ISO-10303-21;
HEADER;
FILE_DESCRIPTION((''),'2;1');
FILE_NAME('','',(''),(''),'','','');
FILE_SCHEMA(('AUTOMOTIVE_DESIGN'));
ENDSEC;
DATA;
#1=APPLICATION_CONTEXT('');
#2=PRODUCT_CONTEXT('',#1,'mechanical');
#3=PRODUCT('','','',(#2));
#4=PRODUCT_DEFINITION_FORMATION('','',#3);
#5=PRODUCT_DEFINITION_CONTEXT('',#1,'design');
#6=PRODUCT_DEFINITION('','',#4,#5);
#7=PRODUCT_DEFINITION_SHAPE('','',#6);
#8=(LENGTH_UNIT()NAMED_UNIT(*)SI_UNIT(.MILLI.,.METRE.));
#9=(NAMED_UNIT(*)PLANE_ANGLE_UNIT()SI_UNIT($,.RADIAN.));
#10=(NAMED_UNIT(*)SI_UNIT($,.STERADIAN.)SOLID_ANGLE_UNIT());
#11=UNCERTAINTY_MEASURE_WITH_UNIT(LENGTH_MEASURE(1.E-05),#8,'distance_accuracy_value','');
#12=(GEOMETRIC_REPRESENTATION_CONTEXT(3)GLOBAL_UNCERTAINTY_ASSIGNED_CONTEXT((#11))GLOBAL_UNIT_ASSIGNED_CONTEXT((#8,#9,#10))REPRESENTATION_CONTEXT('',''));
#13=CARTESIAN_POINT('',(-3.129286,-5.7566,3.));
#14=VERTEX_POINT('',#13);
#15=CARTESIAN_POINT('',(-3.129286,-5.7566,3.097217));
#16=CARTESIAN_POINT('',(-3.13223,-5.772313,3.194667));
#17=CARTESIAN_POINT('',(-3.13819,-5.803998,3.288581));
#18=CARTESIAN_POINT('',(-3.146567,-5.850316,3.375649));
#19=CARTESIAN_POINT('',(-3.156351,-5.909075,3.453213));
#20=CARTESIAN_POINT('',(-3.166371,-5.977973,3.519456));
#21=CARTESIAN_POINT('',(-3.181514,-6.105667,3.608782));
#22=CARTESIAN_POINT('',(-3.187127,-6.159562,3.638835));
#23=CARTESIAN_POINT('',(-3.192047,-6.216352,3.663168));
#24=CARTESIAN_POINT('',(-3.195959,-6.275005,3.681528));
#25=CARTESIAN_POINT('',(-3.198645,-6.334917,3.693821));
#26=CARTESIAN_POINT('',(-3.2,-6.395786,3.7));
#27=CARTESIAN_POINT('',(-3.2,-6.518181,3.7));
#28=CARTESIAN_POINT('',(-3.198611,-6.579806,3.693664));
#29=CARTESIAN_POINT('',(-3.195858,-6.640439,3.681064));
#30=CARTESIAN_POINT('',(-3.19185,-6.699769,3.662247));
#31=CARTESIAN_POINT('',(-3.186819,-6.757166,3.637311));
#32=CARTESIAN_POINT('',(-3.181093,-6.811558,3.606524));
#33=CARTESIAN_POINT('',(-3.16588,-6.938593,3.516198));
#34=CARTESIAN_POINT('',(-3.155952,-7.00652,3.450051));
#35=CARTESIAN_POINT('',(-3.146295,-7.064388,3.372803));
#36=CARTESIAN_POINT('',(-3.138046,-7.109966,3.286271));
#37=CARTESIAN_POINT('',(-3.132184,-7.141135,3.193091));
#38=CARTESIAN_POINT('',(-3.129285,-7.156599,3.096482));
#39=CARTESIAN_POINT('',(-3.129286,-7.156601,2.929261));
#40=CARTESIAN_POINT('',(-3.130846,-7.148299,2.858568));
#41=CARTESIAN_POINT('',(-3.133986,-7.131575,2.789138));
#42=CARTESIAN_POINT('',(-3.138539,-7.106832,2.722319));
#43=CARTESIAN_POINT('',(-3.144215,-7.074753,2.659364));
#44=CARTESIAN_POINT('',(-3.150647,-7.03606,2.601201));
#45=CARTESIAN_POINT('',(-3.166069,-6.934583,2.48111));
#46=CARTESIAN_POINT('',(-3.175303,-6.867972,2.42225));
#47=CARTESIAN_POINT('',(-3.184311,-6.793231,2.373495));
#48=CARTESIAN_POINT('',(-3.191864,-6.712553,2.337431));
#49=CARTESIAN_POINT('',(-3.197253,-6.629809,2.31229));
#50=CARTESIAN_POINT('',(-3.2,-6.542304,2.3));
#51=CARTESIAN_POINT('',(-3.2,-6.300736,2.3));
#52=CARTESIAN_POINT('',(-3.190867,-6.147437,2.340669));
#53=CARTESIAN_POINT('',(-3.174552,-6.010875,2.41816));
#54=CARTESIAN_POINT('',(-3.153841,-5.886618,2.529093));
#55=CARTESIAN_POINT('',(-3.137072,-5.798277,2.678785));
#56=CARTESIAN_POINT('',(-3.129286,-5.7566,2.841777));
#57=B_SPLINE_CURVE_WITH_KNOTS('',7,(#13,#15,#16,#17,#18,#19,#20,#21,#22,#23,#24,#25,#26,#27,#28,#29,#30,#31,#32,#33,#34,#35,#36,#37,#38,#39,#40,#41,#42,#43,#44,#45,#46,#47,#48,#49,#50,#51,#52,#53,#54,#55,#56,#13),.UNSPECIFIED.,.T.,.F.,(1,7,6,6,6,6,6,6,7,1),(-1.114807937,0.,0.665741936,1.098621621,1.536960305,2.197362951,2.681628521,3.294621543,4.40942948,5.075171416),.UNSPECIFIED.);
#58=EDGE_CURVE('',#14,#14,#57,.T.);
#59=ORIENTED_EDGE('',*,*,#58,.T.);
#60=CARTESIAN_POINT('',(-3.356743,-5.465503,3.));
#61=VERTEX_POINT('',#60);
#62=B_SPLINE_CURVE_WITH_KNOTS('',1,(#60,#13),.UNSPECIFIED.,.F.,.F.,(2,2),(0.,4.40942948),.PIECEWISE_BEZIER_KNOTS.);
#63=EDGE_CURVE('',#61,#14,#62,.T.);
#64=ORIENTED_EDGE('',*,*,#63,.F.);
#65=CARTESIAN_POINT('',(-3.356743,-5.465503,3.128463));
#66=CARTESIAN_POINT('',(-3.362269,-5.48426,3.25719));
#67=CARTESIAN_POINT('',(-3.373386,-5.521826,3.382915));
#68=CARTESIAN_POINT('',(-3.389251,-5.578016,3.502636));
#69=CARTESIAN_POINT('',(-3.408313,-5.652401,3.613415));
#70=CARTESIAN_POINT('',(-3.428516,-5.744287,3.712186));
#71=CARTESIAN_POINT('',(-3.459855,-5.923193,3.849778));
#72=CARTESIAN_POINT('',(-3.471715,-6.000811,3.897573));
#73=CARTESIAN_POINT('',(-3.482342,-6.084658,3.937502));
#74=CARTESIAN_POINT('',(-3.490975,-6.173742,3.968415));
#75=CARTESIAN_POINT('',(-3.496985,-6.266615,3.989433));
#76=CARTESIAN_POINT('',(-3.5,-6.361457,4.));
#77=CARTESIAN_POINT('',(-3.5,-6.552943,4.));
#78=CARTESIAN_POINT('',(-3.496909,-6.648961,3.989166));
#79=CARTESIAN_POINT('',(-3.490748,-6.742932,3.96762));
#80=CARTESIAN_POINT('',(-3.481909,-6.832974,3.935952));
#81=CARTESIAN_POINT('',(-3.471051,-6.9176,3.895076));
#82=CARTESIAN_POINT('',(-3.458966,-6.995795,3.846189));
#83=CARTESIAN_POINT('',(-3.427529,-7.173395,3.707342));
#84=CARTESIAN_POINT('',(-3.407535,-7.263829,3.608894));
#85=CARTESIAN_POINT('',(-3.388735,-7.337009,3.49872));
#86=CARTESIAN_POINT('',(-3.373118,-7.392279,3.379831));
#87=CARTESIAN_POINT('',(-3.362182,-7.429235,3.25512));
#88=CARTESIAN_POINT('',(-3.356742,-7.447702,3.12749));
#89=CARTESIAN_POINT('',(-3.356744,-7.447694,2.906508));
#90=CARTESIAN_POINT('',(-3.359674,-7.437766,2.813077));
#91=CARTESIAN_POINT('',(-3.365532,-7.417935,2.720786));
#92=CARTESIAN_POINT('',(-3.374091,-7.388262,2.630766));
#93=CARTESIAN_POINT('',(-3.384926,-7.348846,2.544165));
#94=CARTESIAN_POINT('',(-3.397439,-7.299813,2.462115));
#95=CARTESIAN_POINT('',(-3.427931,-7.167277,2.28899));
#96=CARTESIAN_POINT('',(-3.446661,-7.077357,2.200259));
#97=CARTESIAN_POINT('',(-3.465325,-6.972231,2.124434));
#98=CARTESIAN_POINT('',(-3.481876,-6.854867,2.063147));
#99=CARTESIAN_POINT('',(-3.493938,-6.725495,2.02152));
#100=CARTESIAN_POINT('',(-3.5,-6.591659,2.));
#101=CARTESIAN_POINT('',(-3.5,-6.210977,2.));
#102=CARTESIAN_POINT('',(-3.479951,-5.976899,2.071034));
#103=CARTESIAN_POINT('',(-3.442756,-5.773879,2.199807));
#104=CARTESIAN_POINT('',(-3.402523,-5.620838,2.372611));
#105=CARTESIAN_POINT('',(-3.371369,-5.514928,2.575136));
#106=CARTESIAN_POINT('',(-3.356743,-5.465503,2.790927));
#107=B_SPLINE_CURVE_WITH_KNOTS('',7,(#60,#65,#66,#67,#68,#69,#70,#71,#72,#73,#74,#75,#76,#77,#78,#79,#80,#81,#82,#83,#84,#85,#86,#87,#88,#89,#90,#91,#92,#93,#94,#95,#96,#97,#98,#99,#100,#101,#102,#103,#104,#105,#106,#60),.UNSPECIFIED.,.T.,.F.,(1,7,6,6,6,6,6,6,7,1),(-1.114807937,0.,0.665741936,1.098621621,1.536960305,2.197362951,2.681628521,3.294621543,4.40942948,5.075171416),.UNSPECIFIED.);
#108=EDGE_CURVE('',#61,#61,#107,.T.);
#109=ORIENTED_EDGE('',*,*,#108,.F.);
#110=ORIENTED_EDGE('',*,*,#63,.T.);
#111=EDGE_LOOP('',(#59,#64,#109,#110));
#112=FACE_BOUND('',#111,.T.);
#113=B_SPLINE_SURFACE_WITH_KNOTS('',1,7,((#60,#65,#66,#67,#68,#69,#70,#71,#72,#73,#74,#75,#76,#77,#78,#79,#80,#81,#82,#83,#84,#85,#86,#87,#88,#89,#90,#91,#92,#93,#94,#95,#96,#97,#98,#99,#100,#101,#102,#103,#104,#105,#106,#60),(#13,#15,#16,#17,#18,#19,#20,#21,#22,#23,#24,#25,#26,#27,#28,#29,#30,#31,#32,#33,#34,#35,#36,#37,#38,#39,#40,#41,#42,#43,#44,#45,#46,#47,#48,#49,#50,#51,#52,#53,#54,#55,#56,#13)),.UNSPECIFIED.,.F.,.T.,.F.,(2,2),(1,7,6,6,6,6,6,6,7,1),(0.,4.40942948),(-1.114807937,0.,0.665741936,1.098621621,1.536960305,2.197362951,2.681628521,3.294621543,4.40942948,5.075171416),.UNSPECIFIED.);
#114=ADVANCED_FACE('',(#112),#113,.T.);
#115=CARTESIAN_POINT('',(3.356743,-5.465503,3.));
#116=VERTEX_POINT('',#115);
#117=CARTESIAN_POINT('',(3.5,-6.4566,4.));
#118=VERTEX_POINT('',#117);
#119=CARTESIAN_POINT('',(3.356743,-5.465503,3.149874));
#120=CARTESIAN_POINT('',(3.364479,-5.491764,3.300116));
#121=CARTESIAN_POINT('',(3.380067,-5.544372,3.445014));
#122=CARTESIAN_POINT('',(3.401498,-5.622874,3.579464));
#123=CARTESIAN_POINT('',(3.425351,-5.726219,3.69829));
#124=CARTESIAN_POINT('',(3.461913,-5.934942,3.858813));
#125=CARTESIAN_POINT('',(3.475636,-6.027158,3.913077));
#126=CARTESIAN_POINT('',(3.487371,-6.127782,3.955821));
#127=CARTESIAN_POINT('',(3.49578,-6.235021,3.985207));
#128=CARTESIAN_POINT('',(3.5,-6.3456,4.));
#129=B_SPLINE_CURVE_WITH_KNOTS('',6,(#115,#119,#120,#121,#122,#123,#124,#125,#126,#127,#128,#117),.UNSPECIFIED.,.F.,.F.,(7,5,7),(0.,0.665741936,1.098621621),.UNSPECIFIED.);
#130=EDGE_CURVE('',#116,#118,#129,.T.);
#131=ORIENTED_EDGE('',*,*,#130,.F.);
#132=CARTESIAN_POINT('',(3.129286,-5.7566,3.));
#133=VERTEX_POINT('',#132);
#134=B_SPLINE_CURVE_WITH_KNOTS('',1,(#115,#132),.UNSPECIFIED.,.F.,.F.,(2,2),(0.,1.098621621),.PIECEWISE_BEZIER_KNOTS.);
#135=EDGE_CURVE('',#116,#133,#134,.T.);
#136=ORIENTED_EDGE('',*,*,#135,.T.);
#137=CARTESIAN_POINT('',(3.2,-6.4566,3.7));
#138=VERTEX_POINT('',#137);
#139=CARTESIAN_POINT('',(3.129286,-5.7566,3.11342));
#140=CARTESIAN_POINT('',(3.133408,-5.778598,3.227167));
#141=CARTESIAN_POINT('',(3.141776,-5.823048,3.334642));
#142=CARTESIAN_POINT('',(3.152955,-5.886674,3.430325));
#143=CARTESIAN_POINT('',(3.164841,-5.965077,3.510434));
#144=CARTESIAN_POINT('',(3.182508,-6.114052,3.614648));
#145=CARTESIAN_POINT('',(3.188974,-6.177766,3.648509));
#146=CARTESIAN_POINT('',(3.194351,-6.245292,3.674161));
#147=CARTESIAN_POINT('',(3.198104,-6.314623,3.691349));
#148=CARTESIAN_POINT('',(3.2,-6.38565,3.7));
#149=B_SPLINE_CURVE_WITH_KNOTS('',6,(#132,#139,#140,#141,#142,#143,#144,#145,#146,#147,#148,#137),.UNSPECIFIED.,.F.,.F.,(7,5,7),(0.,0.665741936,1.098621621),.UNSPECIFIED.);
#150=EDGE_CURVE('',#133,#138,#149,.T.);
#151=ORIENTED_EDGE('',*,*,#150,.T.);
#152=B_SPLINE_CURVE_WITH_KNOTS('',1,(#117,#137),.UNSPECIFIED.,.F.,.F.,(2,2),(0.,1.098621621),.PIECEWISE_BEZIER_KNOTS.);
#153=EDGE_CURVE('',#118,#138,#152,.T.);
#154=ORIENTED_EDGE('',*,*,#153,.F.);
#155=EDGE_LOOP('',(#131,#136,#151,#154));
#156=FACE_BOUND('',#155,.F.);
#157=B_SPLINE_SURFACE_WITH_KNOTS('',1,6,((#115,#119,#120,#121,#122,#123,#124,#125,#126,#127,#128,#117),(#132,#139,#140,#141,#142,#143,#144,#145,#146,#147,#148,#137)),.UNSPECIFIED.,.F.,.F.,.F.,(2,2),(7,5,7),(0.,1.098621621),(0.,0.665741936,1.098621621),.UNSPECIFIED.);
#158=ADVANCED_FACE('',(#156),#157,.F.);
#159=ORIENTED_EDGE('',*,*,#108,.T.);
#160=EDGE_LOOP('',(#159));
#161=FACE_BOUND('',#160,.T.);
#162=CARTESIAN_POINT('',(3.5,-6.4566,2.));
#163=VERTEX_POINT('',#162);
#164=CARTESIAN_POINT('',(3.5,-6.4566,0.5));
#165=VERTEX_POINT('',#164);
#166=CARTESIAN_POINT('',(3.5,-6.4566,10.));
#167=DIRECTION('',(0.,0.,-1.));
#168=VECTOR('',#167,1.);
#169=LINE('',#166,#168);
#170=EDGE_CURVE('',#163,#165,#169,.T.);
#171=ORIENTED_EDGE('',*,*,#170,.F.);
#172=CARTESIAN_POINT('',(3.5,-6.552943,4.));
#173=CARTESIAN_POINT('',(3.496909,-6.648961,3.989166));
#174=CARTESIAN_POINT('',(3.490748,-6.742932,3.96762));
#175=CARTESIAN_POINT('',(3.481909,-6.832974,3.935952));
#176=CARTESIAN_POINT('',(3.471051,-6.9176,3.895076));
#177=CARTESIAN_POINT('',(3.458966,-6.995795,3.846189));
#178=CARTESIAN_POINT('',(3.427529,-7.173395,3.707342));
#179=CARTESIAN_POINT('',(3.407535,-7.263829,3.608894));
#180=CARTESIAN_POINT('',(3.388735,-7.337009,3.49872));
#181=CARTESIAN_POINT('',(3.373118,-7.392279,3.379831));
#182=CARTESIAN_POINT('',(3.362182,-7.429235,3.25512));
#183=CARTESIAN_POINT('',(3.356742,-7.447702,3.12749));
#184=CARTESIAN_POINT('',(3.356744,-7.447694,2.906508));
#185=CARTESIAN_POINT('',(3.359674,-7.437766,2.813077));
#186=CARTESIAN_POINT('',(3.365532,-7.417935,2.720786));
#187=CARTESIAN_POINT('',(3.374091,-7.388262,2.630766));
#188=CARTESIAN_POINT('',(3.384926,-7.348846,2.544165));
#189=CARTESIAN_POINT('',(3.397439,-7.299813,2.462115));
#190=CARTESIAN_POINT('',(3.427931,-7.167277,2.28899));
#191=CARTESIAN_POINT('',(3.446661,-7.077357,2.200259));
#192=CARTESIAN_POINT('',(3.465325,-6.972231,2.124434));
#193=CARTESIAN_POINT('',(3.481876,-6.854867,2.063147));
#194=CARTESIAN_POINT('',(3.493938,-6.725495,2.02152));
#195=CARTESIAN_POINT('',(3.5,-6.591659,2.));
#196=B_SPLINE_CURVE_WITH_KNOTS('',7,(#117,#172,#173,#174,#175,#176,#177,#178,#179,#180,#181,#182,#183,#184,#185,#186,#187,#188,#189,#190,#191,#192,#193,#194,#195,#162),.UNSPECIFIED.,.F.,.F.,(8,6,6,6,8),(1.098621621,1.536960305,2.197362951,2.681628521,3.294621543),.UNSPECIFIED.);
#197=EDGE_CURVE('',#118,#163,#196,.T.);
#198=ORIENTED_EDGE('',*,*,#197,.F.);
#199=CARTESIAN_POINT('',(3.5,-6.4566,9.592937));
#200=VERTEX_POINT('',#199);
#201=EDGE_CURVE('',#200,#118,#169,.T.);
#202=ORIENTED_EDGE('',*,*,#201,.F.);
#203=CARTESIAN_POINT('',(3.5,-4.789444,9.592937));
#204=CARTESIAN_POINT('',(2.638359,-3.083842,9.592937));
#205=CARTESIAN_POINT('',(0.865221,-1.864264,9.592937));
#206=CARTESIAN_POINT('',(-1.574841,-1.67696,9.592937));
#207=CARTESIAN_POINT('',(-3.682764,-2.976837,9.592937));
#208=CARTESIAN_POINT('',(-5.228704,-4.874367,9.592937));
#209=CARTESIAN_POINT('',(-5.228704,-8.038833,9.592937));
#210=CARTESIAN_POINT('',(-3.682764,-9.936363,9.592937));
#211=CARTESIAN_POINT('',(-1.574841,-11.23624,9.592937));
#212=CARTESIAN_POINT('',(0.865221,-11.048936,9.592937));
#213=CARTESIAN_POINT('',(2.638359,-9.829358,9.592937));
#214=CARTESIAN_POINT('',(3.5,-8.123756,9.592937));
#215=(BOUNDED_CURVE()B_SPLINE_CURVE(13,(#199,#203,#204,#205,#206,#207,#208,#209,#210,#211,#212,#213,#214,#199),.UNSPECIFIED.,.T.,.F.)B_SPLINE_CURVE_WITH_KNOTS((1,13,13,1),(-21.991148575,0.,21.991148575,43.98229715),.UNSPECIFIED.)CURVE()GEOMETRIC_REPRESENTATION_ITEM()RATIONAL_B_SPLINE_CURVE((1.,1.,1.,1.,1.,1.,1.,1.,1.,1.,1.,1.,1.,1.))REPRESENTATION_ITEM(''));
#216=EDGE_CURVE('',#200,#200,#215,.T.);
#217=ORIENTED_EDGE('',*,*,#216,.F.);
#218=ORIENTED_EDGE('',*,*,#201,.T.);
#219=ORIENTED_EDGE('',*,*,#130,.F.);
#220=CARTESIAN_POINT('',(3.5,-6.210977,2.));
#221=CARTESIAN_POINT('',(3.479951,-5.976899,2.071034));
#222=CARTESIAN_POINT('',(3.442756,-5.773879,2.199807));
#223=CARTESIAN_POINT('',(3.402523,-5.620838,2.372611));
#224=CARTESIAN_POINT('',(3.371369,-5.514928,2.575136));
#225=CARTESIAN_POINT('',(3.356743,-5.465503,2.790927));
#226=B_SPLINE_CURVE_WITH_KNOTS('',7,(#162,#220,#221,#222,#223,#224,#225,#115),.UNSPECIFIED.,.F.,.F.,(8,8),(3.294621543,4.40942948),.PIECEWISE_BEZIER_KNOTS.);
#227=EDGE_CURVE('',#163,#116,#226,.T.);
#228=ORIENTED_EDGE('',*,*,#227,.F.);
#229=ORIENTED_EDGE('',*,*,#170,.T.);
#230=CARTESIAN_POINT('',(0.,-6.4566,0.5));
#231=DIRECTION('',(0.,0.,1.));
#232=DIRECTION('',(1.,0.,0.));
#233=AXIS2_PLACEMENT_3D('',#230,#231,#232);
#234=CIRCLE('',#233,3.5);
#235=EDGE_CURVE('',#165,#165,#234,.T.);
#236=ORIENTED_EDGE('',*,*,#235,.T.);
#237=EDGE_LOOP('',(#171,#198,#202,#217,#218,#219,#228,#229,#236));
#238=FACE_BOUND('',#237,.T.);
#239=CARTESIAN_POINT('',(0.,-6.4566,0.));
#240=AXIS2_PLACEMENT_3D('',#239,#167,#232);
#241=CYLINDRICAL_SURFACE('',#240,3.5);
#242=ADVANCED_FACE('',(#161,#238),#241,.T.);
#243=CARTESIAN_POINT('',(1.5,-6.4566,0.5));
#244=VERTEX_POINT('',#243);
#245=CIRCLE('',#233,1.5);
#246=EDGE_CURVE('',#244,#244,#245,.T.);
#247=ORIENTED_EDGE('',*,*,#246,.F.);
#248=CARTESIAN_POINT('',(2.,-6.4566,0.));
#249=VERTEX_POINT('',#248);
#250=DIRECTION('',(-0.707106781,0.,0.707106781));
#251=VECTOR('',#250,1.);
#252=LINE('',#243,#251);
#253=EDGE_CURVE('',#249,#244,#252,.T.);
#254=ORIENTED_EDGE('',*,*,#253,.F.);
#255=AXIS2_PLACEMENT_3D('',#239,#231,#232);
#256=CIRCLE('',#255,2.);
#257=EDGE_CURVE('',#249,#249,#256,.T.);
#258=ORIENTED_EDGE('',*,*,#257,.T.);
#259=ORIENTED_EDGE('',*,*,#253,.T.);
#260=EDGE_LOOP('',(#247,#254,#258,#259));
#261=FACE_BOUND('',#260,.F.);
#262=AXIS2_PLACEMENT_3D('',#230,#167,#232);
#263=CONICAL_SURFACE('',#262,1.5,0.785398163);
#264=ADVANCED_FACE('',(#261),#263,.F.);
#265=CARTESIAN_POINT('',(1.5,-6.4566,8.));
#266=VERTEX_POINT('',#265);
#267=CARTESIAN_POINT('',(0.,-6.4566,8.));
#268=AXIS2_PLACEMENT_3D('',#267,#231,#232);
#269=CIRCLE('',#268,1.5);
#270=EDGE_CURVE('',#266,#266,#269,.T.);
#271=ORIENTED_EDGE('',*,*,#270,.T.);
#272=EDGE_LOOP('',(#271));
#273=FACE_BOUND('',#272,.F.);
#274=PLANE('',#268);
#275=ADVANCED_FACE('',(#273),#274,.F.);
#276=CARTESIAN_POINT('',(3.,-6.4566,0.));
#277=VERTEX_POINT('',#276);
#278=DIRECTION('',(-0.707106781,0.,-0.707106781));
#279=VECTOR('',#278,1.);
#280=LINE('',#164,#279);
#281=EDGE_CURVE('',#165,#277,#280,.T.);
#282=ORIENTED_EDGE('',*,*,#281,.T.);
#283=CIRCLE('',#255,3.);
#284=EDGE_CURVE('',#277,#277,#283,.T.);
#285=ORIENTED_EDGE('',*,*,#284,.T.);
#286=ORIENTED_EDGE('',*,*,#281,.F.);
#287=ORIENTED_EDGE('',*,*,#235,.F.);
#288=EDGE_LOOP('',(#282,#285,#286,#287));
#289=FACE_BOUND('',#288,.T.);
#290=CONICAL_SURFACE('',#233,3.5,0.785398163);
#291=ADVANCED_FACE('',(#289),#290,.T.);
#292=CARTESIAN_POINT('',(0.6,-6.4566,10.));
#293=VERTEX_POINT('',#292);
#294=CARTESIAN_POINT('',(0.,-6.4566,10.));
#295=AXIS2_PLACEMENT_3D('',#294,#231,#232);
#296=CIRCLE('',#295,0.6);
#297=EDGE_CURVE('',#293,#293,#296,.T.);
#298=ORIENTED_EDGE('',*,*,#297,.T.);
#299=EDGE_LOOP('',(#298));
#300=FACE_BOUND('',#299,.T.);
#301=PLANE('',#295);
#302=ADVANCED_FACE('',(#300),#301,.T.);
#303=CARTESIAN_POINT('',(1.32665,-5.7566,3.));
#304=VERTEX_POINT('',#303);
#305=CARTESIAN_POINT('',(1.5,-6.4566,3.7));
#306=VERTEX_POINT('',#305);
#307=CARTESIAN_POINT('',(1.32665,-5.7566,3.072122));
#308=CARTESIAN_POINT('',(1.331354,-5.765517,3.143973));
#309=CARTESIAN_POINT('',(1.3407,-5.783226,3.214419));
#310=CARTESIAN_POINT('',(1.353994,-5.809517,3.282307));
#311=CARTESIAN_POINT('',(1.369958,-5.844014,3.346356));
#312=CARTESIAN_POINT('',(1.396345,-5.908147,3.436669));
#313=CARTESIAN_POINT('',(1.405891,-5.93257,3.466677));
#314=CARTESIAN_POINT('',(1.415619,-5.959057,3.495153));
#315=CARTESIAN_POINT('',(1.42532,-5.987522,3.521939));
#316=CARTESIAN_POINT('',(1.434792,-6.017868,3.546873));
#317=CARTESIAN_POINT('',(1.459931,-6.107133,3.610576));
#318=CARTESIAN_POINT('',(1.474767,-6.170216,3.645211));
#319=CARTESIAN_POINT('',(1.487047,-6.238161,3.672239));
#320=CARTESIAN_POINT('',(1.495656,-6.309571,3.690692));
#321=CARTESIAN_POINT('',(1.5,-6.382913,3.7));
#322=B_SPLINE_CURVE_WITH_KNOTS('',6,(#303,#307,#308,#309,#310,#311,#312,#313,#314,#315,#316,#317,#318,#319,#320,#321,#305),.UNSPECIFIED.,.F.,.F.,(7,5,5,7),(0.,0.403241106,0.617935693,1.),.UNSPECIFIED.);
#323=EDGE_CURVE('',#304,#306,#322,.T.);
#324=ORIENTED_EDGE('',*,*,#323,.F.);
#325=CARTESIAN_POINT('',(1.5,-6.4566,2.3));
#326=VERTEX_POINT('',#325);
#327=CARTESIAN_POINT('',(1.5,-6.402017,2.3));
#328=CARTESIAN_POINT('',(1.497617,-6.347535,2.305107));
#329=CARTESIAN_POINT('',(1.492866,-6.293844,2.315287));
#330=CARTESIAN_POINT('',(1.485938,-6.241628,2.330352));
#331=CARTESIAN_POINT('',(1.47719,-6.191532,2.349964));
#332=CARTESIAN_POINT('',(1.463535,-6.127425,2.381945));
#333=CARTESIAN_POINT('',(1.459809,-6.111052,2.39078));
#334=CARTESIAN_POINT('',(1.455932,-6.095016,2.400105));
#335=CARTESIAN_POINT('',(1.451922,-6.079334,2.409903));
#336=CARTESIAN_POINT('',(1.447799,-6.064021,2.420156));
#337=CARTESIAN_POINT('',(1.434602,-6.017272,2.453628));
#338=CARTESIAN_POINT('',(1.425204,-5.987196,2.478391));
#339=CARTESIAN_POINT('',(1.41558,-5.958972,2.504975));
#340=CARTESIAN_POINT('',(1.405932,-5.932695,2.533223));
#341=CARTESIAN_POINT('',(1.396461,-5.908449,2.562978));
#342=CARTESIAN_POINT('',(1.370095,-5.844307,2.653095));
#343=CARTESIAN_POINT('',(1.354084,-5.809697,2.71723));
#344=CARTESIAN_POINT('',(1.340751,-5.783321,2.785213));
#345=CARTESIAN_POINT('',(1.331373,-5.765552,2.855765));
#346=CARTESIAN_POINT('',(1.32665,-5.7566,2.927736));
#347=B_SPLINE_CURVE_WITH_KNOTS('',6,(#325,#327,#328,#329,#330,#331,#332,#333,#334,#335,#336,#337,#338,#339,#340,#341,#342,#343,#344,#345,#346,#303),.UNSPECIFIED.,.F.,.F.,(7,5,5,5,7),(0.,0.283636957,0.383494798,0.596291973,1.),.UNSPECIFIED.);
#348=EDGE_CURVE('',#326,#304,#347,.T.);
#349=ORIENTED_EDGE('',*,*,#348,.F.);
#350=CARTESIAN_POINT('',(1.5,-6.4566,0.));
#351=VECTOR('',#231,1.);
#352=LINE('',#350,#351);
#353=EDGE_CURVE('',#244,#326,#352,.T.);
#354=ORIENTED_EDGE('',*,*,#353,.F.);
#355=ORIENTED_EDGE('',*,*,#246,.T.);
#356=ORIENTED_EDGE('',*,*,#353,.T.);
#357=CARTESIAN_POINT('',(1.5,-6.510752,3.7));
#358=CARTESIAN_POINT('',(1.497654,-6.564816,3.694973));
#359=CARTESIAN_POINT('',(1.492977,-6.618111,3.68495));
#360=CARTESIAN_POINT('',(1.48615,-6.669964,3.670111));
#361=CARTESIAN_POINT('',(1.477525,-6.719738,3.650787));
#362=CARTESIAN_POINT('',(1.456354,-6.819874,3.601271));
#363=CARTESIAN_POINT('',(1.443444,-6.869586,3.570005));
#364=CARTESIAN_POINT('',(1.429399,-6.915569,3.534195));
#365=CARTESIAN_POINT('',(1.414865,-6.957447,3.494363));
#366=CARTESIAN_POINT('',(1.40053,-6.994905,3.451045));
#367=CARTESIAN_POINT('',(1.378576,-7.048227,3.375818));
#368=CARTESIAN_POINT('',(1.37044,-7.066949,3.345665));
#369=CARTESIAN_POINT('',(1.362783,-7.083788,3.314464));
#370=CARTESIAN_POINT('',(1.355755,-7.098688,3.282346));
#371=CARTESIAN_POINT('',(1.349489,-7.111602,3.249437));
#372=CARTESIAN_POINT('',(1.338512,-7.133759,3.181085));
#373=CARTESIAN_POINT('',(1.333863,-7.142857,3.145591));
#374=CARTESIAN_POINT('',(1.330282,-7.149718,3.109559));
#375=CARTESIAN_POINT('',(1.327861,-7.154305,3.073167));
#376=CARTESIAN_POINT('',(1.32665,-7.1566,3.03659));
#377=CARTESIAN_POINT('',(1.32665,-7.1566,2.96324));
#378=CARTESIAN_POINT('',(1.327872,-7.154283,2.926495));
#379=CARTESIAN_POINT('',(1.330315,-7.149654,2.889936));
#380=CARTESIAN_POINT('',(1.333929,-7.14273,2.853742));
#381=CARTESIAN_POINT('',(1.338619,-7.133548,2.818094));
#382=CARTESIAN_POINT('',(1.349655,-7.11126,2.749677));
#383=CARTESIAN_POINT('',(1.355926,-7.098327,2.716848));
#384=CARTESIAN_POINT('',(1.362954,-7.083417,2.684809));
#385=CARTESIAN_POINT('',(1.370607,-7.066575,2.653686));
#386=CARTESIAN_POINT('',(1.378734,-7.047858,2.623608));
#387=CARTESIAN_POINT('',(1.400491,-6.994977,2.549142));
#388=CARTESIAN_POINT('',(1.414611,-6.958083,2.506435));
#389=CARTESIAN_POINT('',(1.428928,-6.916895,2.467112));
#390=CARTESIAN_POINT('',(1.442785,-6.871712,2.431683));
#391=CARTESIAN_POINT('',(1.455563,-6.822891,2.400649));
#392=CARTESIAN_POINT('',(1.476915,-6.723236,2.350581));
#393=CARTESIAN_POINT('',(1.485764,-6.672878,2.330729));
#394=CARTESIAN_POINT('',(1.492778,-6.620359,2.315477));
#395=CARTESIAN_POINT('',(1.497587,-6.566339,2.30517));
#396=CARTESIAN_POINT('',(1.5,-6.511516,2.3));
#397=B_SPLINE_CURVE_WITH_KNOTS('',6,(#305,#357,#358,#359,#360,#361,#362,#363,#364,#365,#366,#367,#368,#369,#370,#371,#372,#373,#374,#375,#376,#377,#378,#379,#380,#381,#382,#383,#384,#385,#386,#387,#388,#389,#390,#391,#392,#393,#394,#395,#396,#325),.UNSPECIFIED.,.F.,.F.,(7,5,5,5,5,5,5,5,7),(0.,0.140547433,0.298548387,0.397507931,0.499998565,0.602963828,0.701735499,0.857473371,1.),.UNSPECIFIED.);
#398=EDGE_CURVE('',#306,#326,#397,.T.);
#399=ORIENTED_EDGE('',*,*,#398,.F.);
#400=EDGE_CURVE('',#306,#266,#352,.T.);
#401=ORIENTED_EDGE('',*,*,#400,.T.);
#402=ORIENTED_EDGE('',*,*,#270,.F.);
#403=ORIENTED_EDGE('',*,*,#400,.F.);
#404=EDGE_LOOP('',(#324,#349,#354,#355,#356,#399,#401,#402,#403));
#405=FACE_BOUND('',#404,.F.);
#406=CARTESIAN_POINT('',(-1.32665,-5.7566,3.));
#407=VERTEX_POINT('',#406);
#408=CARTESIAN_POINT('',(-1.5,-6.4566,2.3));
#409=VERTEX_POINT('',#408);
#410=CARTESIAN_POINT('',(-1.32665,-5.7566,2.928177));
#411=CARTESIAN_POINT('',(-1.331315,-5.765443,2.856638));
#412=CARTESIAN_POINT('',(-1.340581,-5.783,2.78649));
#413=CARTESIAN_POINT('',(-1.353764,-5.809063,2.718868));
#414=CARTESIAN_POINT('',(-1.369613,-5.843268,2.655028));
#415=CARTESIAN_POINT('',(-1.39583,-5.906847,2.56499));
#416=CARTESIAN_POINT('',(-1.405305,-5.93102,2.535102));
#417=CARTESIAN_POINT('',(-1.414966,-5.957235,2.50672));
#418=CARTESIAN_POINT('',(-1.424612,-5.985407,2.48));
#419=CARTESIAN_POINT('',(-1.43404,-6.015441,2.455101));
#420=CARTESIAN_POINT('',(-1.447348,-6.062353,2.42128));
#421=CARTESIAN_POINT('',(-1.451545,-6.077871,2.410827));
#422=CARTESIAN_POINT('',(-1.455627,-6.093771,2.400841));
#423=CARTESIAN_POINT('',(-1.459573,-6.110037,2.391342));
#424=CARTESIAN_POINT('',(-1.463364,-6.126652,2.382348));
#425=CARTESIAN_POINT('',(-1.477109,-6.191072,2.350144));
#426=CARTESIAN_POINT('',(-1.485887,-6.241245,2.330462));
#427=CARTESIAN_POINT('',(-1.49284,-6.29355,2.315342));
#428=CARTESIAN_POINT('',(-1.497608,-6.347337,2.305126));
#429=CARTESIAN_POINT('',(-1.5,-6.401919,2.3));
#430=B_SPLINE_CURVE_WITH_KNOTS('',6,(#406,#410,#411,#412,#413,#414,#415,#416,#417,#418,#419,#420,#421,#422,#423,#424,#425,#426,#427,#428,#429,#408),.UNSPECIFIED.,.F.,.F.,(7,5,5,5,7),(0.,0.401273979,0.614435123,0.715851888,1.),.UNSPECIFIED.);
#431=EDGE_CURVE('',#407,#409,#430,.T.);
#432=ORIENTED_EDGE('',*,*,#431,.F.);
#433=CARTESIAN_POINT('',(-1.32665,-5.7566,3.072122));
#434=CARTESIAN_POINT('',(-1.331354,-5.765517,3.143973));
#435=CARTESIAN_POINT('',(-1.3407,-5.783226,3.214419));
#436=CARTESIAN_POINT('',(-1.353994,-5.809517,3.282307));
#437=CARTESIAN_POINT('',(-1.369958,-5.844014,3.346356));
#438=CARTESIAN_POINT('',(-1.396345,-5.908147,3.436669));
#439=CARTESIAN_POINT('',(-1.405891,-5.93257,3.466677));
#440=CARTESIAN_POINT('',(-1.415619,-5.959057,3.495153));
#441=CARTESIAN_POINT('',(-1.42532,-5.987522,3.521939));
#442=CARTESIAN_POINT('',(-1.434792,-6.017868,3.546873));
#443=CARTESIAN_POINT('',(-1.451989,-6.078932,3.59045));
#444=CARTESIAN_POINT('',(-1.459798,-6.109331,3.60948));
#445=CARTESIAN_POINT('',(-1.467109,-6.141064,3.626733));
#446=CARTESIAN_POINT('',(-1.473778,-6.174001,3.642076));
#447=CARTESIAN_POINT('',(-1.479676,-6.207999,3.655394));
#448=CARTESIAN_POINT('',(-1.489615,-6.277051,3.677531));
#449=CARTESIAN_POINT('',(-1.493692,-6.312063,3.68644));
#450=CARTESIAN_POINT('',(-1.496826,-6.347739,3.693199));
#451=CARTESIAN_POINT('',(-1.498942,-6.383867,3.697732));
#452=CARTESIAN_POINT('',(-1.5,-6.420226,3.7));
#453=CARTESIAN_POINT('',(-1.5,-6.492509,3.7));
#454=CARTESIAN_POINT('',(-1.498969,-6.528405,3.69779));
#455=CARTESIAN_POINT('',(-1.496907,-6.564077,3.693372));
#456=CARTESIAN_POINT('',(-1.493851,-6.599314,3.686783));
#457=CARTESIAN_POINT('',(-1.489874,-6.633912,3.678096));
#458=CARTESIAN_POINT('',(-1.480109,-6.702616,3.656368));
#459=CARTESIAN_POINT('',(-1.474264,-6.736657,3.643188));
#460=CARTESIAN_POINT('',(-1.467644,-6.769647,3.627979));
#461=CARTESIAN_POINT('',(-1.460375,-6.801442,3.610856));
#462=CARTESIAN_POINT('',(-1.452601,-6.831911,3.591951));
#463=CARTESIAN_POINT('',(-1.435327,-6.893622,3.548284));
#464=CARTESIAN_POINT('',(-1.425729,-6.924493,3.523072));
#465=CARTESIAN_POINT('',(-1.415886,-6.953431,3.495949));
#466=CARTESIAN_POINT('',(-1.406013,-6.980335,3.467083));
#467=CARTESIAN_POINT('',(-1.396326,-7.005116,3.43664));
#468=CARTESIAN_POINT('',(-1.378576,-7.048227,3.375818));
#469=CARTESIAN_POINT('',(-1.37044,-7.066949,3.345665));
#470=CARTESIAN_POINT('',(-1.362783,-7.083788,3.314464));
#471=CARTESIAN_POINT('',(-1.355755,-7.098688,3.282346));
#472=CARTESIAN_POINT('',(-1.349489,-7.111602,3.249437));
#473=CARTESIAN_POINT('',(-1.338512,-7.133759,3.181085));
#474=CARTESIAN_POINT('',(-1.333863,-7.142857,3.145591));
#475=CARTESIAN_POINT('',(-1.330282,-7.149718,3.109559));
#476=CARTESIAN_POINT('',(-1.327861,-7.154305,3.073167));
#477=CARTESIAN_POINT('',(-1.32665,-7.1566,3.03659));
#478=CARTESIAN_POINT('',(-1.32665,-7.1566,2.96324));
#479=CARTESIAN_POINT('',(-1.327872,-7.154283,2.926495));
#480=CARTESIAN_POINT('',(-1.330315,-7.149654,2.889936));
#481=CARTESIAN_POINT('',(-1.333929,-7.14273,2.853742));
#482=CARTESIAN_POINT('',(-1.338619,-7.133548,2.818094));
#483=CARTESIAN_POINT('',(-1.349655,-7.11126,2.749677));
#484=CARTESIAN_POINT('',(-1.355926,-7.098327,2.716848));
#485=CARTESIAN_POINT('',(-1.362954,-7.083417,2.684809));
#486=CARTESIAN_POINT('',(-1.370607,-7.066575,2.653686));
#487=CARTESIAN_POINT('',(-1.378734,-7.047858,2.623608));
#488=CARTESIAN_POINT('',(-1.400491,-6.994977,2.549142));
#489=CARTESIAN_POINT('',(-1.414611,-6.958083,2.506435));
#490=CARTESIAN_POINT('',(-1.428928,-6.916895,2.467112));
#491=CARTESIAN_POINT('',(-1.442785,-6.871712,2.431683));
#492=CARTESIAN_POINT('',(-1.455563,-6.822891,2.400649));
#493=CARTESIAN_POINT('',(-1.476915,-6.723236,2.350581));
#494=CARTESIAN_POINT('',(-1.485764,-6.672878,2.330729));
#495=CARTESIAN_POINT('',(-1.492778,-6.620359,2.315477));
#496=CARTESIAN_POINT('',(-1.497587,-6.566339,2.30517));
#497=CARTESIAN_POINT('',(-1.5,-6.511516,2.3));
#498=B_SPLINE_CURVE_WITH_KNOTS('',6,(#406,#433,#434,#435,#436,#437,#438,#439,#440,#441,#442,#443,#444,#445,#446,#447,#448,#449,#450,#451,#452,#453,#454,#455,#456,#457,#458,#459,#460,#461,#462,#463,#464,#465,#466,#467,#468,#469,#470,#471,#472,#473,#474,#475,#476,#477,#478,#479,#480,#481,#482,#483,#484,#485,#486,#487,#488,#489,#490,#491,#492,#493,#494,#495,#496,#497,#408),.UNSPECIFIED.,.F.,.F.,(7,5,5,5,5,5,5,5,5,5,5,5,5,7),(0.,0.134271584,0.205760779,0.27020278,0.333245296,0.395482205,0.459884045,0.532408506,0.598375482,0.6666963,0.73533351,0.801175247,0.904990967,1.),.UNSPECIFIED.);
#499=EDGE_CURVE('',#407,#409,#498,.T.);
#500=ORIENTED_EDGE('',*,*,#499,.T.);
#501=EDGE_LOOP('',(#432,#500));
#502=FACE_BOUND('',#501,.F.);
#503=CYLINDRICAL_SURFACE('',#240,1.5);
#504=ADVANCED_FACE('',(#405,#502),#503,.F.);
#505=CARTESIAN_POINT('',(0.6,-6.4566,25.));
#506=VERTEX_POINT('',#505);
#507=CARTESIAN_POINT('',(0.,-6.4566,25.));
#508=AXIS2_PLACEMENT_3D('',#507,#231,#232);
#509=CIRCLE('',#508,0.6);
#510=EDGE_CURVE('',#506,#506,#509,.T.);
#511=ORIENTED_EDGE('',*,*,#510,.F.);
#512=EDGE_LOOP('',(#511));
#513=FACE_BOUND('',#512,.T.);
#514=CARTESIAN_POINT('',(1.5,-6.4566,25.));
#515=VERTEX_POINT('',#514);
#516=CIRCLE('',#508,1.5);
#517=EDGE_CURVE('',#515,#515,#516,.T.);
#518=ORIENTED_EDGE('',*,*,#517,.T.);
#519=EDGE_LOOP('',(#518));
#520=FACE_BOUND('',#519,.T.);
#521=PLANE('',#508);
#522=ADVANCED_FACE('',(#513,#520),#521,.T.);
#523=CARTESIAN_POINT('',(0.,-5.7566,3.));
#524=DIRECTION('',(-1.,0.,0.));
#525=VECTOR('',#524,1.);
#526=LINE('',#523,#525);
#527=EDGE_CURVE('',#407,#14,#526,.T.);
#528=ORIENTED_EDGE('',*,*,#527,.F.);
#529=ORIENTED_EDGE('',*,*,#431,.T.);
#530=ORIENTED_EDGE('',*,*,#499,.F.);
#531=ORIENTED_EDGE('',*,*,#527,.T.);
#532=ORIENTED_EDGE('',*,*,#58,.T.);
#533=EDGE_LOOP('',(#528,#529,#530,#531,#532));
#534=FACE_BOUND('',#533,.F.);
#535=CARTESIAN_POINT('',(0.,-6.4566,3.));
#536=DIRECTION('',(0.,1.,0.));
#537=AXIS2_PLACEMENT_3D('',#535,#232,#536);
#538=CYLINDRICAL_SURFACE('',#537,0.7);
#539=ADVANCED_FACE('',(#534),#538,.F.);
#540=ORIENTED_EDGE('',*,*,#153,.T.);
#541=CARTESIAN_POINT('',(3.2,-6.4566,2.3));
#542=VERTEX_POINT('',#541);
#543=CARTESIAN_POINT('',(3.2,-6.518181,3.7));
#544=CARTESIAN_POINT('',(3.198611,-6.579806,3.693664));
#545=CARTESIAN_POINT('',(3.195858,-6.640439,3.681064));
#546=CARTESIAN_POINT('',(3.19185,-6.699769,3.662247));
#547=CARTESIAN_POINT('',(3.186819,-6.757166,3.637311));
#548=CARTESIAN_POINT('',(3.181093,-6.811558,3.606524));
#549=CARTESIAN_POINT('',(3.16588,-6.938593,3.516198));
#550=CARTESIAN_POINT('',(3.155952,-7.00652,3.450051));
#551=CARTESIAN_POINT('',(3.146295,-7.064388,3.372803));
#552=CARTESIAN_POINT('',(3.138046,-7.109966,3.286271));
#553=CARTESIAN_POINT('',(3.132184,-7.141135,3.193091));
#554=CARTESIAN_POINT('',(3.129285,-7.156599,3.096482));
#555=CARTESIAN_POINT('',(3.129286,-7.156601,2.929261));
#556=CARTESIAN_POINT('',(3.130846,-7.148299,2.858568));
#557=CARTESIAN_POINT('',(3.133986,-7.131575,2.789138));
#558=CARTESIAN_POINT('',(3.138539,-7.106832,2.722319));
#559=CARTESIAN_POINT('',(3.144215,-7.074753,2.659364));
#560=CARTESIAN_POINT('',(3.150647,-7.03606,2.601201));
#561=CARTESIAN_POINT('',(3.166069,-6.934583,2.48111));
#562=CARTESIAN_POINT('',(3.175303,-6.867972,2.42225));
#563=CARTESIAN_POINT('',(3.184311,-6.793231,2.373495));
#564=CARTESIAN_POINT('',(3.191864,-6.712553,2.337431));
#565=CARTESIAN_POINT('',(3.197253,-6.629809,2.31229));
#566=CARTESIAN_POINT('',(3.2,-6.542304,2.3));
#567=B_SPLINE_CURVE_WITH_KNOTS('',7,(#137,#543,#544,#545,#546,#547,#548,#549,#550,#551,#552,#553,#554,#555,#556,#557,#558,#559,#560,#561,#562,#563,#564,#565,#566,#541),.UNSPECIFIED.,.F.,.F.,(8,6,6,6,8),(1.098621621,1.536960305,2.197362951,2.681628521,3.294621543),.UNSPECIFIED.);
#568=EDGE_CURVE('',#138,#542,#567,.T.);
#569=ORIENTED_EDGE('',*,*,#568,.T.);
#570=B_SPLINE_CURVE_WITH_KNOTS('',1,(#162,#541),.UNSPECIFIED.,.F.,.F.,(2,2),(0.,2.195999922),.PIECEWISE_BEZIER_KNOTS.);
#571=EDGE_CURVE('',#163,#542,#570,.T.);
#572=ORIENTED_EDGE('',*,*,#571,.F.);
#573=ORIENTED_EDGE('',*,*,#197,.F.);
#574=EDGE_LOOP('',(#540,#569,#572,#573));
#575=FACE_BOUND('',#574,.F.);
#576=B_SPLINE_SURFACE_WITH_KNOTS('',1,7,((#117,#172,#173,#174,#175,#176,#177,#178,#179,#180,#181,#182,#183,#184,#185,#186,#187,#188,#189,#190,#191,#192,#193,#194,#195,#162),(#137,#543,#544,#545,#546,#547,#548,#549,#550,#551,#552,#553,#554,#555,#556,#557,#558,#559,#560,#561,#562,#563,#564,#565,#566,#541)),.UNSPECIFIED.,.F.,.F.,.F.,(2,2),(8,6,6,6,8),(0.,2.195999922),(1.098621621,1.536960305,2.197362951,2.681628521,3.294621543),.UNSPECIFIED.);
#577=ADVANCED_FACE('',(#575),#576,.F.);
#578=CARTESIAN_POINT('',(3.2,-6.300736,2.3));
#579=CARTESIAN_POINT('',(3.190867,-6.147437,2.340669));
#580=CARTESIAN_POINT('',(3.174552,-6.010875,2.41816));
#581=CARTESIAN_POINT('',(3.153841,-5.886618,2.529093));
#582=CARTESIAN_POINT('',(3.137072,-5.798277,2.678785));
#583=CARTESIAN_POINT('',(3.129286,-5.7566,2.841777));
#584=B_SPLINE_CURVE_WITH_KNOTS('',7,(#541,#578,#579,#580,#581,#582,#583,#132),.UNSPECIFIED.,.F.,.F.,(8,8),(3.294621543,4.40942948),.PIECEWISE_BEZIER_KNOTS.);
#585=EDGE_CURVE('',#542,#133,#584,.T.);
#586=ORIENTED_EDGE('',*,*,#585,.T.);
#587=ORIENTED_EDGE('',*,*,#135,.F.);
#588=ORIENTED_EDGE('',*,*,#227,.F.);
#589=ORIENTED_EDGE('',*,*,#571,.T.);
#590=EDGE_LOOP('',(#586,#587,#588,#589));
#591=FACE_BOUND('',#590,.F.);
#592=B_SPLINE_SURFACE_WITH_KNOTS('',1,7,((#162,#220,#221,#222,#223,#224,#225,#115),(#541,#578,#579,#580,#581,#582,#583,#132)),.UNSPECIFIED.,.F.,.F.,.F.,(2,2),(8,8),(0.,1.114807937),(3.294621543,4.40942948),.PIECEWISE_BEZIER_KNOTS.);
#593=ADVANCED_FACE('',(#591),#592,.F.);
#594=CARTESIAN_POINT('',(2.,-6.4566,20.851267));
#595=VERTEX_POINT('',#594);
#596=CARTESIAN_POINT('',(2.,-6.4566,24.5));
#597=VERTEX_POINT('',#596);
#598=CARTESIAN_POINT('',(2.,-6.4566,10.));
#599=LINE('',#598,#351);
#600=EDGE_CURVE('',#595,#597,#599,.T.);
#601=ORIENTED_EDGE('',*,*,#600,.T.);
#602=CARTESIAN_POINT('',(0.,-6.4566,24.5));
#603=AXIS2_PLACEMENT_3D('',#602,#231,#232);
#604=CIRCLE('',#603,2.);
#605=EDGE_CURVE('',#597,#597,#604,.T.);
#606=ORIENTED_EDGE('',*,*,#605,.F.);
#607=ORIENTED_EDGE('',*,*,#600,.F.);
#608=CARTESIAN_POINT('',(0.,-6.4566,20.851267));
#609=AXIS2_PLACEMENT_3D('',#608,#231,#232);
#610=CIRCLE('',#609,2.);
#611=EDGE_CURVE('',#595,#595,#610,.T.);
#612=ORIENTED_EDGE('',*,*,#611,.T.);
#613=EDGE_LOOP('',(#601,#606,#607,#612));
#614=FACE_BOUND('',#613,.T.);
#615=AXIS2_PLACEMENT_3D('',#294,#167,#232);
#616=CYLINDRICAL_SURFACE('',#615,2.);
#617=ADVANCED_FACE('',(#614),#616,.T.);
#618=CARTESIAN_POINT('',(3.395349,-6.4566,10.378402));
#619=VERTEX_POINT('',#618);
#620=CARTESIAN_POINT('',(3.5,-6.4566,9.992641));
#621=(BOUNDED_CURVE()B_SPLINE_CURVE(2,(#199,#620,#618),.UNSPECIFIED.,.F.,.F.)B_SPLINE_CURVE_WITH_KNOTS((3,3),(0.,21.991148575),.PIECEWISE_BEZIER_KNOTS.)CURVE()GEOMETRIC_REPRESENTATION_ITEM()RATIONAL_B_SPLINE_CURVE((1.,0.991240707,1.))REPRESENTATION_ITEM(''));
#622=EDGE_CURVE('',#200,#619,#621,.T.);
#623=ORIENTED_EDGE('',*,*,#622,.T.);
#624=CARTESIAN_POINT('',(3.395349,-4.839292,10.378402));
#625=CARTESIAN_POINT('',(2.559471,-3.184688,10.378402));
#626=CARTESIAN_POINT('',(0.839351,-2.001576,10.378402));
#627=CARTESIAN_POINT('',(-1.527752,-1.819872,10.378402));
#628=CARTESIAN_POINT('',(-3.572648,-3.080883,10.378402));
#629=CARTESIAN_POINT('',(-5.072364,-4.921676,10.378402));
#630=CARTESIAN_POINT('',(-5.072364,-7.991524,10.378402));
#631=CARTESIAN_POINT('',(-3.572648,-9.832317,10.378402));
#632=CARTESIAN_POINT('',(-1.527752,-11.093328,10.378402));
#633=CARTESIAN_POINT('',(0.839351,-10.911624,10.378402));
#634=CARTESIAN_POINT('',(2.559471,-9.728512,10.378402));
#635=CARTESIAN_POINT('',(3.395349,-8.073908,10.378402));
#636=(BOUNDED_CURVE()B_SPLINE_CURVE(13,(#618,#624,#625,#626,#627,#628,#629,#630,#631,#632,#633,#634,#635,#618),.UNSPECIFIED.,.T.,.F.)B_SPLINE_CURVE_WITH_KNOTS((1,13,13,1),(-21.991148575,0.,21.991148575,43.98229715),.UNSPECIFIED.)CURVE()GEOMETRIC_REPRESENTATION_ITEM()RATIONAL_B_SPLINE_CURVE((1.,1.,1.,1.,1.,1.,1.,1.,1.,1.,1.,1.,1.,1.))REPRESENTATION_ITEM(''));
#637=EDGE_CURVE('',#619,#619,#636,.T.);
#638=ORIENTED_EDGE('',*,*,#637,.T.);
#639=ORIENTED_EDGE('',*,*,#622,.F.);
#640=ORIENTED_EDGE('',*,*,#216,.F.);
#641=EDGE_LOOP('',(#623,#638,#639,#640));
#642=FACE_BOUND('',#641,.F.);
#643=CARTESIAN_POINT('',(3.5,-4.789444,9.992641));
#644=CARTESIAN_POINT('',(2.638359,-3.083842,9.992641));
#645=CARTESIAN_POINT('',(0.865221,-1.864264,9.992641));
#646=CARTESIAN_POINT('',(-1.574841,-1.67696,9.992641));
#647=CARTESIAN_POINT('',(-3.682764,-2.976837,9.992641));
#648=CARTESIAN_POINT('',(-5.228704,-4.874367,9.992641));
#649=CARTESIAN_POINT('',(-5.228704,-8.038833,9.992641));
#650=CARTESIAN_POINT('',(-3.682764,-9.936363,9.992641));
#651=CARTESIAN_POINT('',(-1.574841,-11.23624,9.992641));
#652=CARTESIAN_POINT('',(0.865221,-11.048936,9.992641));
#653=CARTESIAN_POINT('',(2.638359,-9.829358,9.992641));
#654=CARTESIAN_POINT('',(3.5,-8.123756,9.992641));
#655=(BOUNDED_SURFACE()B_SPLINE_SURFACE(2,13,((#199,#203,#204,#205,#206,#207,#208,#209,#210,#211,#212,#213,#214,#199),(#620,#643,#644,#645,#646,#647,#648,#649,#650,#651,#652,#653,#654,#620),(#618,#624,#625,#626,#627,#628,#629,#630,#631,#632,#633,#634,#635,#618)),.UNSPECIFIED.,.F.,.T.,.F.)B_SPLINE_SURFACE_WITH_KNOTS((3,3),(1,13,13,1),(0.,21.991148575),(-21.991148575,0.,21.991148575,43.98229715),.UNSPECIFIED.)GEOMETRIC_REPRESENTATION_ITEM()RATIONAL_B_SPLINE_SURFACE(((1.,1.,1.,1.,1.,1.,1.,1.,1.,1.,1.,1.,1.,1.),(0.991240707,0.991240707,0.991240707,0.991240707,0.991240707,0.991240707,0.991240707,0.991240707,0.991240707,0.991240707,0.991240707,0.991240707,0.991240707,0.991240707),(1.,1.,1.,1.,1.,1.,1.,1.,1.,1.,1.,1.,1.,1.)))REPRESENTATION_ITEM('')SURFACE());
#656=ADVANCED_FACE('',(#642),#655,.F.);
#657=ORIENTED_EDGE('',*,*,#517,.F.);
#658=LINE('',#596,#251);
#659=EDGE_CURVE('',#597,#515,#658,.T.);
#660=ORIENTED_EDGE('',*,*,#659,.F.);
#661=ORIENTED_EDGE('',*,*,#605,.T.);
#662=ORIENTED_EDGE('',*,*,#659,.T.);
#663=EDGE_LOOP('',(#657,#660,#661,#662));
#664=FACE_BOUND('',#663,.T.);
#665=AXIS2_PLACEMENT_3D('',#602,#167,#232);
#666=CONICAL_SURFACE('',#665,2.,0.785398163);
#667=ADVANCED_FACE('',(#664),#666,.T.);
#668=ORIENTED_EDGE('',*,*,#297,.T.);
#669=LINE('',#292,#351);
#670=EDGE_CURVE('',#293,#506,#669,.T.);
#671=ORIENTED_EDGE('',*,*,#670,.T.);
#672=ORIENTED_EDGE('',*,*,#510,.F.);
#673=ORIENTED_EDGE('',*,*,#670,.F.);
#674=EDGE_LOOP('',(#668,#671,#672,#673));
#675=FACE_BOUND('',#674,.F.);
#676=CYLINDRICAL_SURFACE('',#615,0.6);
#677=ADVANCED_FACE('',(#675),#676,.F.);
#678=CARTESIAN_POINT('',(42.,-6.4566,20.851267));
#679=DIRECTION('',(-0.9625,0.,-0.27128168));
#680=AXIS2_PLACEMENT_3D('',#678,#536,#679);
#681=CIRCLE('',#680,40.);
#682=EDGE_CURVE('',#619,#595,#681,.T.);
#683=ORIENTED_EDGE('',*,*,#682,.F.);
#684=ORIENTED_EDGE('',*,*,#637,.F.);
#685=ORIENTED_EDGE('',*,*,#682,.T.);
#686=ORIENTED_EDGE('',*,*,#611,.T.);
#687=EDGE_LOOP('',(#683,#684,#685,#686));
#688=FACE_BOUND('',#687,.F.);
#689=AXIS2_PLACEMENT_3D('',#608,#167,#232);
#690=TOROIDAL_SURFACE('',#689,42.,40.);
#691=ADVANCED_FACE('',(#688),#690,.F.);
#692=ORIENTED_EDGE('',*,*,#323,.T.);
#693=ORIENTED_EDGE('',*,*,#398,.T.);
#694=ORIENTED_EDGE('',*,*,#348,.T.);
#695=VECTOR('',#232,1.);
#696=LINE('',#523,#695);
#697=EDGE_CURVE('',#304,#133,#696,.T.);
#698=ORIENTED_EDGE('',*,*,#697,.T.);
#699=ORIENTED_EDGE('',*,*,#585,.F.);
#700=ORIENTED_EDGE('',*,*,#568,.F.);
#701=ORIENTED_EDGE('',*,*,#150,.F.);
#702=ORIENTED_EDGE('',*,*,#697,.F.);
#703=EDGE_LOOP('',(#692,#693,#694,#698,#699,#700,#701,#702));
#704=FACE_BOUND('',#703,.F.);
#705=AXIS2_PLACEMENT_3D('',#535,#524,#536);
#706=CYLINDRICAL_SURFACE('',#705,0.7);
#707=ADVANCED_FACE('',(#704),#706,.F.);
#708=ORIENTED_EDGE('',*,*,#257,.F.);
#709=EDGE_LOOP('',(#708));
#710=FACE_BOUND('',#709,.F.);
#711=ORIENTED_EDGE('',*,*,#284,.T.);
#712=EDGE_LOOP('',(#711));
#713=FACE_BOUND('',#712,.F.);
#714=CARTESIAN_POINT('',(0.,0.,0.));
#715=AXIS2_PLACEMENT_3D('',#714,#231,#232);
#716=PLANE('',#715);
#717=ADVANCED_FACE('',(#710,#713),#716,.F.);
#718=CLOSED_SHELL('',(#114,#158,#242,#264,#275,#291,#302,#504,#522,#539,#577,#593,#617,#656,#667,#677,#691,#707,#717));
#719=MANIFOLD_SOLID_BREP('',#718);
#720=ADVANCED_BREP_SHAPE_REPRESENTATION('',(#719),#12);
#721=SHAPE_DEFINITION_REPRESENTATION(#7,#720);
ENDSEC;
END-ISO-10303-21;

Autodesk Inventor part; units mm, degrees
ref_plane "YZ Plane" through (0, 0, 0) normal (1, 0, 0) x (0, 1, 0)
ref_plane "XZ Plane" through (0, 0, 0) normal (0, 1, 0) x (-1, 0, 0)
ref_plane "XY Plane" through (0, 0, 0) normal (0, 0, 1) x (1, 0, 0)
sketch "Sketch1" plane through (0, 0, 0) normal (0, 0, 1) x (1, 0, 0)
  circle A0 centre (0, -6.4566) radius 1.5 projected
  circle A1 centre (0, -6.4566) radius 1.5
  circle A2 centre (0, -6.4566) radius 3.5
  point P0 (0, 0)
  dimension "d0" = 3
  dimension "d1" = 7
extrude "Extrusion1" add sketch "Sketch1" along normal blind 8
sketch "Sketch2" plane through (0, -6.4566, 8) normal (0, 0, 1) x (1, 0, 0)
  circle A0 centre (0, 0) radius 3.5 projected
  point P0 (0, 6.4566)
extrude "Extrusion2" add sketch "Sketch2" along normal blind 2
sketch "Sketch3" plane through (0, -6.4566, 10) normal (0, 0, 1) x (1, 0, 0)
  circle A0 centre (0, 0) radius 3.5 projected
  circle A1 centre (0, 0) radius 0.6
  circle A2 centre (0, 0) radius 2
  point P0 (0, 6.4566)
  dimension "d6" = 1.2
  dimension "d7" = 4
extrude "Extrusion3" add sketch "Sketch3" along normal blind 15 contours A2
fillet "Fillet1" radius 40 1 edges at (-2, -6.4566, 10)
fillet "Fillet2" radius 3 1 edges at (-3.5, -6.4566, 10)
chamfer "Chamfer1" distance 0.5 angle 45 1 edges at (-1.5, -6.4566, 0)
chamfer "Chamfer2" distance 0.5 angle 45 1 edges at (-2, -6.4566, 25)
sketch "Sketch4" plane through (0, 0, 0) normal (1, 0, 0) x (0, 1, 0)
  line L0 (-2.9566, 0) -> (-9.9566, 0) projected
  line L1 (-6.4566, 0) -> (-6.4566, 3)
  circle A0 centre (-6.4566, 3) radius 0.7
  point P0 (0, 0)
  dimension "d18" = 3
  dimension "d19" = 1.4
extrude "Extrusion4" cut sketch "Sketch4" along normal mid plane 15
chamfer "Chamfer3" distance 0.3 angle 45 4 edges at (3.4625, -5.9454, 3.4781) (3.4627, -5.9468, 2.5204) (3.4293, -7.1566, 2.9993) (-3.4293, -7.1565, 2.9852)
chamfer "Chamfer4" distance 0.5 angle 45 1 edges at (-3.5, -6.4566, 0)
properties part number "needle_conn_1"
